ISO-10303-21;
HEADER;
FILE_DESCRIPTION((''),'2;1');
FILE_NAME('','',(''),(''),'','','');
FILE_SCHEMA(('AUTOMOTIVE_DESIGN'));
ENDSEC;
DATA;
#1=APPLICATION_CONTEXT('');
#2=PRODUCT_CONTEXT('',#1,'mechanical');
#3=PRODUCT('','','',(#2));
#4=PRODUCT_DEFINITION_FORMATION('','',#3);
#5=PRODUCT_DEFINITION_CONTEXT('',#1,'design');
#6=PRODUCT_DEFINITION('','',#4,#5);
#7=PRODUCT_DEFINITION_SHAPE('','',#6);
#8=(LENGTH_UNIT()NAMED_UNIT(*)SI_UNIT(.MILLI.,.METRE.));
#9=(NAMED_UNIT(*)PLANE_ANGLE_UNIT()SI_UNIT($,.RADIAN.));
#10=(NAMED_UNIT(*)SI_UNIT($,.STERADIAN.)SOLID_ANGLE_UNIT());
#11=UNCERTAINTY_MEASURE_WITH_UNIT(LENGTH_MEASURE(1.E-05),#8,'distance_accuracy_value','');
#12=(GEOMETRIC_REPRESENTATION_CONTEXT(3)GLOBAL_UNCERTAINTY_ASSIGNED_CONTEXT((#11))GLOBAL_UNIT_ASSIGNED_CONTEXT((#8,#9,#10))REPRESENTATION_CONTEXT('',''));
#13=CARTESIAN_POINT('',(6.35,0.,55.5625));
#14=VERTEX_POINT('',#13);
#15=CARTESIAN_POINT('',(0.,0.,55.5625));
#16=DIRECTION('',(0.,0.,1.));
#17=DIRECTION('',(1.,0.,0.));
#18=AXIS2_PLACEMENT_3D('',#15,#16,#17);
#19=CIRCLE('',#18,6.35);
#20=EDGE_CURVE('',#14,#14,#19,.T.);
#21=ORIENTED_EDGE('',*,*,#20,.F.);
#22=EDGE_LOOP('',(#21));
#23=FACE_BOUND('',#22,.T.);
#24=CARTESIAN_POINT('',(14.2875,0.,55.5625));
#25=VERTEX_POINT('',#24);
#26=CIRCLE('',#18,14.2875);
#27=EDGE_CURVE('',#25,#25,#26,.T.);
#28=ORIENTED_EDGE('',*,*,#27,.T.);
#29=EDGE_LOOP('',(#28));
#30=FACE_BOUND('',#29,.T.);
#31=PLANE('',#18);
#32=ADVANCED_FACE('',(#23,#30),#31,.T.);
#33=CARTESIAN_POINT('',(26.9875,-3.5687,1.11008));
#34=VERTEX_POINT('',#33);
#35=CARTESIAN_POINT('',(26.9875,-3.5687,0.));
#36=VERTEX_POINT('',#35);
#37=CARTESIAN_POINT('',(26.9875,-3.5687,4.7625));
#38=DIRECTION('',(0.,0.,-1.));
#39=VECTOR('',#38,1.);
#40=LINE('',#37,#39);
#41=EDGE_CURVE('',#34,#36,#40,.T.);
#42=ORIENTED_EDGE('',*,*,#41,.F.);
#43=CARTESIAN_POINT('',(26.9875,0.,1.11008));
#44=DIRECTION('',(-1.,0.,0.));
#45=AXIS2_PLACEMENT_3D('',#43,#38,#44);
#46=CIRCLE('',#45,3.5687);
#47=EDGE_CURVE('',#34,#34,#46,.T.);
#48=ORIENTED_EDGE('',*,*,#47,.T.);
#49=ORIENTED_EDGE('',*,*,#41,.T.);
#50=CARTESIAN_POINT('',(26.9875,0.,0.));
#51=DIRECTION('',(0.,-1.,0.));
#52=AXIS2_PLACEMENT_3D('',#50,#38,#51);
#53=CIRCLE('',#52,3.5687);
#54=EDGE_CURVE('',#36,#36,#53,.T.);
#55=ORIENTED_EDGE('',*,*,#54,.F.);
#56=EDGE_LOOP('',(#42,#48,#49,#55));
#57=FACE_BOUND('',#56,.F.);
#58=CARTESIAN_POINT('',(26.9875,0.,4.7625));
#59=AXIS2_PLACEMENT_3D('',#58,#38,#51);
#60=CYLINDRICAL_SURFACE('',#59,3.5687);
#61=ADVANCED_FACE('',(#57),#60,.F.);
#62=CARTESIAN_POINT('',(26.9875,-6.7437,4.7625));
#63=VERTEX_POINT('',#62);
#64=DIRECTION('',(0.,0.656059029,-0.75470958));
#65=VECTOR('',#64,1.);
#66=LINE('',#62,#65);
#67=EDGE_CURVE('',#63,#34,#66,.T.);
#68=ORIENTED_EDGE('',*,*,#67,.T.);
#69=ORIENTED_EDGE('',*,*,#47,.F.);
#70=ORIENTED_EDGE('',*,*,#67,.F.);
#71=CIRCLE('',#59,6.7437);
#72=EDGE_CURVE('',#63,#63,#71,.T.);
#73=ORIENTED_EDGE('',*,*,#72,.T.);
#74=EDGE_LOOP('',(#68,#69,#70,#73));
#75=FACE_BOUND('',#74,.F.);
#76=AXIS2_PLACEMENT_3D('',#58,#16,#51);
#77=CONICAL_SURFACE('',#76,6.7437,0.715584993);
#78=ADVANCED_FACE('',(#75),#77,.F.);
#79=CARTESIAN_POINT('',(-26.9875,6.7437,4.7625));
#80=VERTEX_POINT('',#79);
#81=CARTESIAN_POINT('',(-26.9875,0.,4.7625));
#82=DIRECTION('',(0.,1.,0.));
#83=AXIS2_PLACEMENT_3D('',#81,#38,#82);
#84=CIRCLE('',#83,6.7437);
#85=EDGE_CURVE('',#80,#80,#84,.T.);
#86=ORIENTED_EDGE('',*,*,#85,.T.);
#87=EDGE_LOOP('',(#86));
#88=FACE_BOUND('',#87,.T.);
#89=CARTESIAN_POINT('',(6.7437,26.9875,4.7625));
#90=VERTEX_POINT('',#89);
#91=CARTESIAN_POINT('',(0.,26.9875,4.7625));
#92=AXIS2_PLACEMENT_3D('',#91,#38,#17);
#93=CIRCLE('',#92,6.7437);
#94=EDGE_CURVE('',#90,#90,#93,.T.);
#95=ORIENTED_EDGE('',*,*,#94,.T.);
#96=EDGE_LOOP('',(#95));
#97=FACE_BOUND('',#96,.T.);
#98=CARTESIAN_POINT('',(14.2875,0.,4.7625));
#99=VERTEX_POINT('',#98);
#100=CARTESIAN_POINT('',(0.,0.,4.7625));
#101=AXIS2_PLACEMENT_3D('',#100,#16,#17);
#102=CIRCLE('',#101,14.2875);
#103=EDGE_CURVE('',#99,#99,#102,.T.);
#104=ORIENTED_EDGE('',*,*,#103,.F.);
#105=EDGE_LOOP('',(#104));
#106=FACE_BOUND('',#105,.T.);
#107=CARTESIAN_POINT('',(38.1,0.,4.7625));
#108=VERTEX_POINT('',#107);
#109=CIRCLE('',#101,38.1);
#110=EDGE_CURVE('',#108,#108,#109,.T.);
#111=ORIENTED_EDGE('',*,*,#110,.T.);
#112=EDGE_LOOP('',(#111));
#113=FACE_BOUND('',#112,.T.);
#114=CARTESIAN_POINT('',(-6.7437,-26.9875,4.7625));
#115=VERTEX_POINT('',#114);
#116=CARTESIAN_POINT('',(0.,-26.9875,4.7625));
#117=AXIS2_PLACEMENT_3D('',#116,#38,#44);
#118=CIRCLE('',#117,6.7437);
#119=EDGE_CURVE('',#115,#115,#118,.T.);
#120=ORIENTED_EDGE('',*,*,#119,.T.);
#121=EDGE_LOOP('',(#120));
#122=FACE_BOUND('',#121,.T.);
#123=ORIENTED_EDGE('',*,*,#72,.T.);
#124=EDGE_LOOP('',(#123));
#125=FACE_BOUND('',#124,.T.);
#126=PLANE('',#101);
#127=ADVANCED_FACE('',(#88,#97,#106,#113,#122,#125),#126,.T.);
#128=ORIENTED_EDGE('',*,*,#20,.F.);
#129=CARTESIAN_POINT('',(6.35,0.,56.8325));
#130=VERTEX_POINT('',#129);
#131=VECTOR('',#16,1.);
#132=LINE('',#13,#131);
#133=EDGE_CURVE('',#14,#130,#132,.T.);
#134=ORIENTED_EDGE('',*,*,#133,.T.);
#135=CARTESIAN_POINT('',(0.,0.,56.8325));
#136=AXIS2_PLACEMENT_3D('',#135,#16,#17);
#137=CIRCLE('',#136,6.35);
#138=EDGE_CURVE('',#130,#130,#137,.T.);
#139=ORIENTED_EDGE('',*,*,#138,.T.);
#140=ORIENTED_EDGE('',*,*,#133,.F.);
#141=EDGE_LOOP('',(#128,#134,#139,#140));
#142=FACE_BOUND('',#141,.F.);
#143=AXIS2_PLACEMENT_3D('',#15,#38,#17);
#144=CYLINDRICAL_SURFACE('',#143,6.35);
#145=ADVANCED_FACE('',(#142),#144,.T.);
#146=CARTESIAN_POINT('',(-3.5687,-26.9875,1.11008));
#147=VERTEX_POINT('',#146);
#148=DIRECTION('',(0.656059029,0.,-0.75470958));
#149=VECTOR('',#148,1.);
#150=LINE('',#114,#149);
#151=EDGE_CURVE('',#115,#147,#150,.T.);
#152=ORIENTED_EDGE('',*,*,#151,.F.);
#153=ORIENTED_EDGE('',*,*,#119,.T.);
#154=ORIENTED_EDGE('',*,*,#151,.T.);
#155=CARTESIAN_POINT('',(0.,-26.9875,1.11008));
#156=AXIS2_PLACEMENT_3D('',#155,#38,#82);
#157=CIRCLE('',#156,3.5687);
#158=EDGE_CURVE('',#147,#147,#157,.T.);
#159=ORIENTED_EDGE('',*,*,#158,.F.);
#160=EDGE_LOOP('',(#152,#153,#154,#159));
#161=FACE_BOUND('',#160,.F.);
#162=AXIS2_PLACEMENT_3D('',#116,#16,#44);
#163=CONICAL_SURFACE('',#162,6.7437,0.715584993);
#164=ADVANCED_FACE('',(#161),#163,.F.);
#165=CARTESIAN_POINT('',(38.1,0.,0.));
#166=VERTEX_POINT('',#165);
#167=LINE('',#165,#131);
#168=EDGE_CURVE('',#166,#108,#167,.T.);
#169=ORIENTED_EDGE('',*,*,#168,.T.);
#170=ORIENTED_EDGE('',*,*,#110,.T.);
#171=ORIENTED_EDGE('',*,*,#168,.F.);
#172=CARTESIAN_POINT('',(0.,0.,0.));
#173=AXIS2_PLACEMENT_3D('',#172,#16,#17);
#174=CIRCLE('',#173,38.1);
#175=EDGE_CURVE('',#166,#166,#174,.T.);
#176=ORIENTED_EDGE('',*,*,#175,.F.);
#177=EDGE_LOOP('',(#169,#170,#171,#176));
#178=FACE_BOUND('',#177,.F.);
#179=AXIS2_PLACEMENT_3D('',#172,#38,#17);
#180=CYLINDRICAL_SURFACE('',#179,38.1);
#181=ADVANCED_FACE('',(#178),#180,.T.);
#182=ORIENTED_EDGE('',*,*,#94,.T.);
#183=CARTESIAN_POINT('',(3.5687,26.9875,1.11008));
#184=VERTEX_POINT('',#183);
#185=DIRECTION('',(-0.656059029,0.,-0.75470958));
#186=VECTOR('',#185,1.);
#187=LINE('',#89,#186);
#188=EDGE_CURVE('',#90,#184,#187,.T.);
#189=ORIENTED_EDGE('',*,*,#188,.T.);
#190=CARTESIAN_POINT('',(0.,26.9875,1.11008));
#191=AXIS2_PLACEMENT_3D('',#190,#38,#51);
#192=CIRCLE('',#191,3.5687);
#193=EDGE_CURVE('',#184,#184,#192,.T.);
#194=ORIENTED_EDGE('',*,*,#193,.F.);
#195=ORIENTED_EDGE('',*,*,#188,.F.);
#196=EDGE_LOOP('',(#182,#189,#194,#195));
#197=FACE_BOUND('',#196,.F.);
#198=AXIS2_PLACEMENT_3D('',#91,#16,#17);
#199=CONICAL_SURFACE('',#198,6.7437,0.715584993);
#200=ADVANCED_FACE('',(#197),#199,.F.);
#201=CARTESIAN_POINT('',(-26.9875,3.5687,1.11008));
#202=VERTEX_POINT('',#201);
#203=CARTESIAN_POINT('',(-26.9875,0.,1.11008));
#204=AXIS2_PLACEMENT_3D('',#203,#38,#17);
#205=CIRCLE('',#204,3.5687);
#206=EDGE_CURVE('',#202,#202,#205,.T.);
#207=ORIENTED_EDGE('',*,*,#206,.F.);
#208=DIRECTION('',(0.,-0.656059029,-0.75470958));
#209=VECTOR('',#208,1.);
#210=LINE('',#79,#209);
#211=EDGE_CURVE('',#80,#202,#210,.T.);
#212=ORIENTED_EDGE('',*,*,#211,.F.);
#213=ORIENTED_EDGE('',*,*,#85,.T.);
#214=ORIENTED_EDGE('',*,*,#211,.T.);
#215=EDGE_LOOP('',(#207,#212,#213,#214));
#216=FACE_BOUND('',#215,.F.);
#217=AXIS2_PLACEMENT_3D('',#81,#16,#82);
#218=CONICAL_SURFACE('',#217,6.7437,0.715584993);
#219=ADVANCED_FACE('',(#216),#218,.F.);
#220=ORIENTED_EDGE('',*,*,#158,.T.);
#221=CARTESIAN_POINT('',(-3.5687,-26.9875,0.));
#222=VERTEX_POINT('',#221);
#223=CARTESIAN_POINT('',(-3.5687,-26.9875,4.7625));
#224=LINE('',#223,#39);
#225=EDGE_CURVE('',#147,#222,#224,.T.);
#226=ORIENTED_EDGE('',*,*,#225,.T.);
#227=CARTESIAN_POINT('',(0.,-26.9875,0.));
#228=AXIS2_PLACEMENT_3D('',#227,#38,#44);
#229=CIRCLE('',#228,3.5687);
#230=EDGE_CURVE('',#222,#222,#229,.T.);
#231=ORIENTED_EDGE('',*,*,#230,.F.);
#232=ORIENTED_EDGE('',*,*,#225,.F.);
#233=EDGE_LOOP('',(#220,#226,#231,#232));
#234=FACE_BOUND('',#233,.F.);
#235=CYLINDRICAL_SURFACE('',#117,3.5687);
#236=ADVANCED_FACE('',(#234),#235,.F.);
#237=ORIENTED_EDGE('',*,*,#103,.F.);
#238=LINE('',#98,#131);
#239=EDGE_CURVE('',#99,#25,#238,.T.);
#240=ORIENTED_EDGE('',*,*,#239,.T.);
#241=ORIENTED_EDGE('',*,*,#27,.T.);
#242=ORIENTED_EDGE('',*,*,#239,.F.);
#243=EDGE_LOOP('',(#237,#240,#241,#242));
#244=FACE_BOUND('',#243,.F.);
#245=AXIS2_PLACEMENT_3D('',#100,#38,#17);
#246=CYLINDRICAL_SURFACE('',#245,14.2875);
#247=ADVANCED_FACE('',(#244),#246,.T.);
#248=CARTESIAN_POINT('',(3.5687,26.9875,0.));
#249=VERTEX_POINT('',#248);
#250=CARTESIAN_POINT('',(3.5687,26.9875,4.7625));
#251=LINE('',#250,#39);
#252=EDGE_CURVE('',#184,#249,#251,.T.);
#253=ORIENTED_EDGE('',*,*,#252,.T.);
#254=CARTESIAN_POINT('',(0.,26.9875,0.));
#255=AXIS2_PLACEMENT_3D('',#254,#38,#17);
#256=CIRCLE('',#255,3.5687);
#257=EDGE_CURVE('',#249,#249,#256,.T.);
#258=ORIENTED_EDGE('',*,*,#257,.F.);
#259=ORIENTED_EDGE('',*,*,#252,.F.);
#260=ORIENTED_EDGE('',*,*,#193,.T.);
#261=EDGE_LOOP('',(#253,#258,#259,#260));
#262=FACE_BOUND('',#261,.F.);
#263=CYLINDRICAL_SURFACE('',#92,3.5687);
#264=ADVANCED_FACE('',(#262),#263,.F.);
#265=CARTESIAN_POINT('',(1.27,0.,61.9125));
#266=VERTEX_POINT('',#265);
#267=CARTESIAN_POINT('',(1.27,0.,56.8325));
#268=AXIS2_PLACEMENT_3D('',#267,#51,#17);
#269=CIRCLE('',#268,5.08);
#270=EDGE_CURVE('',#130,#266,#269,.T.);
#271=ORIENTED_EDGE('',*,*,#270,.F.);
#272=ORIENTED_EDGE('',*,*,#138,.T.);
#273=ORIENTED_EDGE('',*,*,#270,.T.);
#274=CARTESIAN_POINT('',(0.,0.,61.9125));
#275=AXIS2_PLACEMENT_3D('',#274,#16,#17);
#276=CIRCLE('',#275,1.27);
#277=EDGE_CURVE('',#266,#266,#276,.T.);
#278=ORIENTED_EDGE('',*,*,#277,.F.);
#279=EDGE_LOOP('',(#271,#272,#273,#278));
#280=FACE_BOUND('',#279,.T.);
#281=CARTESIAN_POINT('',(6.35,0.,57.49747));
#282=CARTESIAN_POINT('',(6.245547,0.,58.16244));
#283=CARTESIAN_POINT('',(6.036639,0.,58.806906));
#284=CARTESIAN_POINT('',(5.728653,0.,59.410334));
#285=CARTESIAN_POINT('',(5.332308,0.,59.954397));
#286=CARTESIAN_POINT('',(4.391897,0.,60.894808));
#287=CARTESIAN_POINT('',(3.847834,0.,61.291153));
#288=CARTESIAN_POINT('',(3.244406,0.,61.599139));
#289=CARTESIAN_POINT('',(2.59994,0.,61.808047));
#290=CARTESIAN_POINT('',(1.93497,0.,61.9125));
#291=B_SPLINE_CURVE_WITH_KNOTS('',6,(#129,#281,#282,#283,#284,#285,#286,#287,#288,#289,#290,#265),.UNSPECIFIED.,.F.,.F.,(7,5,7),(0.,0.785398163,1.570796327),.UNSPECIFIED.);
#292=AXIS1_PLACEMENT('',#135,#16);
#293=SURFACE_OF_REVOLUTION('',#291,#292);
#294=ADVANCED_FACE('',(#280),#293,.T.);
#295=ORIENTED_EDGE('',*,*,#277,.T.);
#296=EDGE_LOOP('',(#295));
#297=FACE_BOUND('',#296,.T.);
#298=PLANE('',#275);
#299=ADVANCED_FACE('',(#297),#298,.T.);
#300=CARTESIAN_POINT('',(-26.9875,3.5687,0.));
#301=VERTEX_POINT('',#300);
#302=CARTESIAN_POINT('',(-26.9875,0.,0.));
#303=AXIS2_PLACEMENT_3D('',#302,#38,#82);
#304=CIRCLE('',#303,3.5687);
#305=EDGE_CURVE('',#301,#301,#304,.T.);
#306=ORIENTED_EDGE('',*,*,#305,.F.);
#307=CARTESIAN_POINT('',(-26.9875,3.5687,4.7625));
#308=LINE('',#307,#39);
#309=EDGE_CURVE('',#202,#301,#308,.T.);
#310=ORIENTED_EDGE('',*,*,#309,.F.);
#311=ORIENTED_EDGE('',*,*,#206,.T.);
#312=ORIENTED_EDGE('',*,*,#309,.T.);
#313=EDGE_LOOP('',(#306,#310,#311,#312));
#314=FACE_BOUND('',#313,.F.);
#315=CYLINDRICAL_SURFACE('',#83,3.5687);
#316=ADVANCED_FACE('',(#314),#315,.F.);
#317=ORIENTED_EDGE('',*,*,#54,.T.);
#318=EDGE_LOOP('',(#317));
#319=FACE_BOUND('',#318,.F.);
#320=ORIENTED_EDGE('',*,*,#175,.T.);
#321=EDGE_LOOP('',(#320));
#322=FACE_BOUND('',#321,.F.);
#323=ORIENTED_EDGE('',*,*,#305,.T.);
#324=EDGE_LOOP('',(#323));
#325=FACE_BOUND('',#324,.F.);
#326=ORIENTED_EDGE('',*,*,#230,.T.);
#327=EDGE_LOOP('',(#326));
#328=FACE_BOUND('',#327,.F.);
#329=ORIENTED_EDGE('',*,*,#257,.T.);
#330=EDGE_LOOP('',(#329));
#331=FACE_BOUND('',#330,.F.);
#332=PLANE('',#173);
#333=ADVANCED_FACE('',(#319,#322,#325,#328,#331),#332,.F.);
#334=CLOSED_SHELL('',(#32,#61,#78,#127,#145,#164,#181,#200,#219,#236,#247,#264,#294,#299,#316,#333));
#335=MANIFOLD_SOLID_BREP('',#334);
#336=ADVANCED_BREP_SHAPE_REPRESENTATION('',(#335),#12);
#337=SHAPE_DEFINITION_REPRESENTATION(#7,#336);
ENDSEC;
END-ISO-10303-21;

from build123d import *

# Parameters (mm, degrees)
F0_R            = 38.1
F1_DEPTH        = 4.7625
F2_R            = 14.2875
F3_DEPTH        = 50.8
F4_R            = 6.35
F5_DEPTH        = 6.35
F6_R            = 5.08
F8_D            = 7.1374
F8_DEPTH        = 15.875
F8_CSINK_D      = 13.4874
F8_CSINK_ANGLE  = 82
F8_TIP          = 2.1442912911
F8_COPIES_COUNT = 4


# Not quite as in the source:
# - a pattern or mirror of a feature is missing from the dataset's text; its kind, count and spacing are read off the source's solid


with BuildPart() as f1:
    # F0 (on Top) → F1 (new body)
    with BuildSketch(Plane.XY):
        Circle(F0_R)
    extrude(amount=F1_DEPTH)

    # F2 (on face) → F3 (join)
    with BuildSketch(Plane.XY.offset(4.7625)):
        Circle(F2_R)
    extrude(amount=F3_DEPTH)

    # F4 (on face) → F5 (join)
    with BuildSketch(Plane.XY.offset(55.5625)):
        Circle(F4_R)
    extrude(amount=F5_DEPTH)

    # F6
    f6_edges = [f1.edges().sort_by_distance(p)[0] for p in [
        (-6.35, 0, 61.9125),
    ]]
    fillet(f6_edges, radius=F6_R)

    # F8
    with Locations(Plane.XY.offset(4.7625)):
        with Locations((0, -26.9875)):
            f8 = CounterSinkHole(F8_D / 2, F8_CSINK_D / 2, depth=F8_DEPTH, counter_sink_angle=F8_CSINK_ANGLE)
            with Locations((0, 0, -(F8_DEPTH + F8_TIP / 2))):  # 118° drill point
                Cone(0, F8_D / 2, F8_TIP, mode=Mode.SUBTRACT)

    # F8_copies: F8 ×4 about axis
    f8_copies_axis = Axis((0, 0, 0), (0, 0, 1))
    for i in range(1, F8_COPIES_COUNT):
        add(f8.rotate(f8_copies_axis, i * 360 / F8_COPIES_COUNT), mode=Mode.SUBTRACT)


solid = f1.part
